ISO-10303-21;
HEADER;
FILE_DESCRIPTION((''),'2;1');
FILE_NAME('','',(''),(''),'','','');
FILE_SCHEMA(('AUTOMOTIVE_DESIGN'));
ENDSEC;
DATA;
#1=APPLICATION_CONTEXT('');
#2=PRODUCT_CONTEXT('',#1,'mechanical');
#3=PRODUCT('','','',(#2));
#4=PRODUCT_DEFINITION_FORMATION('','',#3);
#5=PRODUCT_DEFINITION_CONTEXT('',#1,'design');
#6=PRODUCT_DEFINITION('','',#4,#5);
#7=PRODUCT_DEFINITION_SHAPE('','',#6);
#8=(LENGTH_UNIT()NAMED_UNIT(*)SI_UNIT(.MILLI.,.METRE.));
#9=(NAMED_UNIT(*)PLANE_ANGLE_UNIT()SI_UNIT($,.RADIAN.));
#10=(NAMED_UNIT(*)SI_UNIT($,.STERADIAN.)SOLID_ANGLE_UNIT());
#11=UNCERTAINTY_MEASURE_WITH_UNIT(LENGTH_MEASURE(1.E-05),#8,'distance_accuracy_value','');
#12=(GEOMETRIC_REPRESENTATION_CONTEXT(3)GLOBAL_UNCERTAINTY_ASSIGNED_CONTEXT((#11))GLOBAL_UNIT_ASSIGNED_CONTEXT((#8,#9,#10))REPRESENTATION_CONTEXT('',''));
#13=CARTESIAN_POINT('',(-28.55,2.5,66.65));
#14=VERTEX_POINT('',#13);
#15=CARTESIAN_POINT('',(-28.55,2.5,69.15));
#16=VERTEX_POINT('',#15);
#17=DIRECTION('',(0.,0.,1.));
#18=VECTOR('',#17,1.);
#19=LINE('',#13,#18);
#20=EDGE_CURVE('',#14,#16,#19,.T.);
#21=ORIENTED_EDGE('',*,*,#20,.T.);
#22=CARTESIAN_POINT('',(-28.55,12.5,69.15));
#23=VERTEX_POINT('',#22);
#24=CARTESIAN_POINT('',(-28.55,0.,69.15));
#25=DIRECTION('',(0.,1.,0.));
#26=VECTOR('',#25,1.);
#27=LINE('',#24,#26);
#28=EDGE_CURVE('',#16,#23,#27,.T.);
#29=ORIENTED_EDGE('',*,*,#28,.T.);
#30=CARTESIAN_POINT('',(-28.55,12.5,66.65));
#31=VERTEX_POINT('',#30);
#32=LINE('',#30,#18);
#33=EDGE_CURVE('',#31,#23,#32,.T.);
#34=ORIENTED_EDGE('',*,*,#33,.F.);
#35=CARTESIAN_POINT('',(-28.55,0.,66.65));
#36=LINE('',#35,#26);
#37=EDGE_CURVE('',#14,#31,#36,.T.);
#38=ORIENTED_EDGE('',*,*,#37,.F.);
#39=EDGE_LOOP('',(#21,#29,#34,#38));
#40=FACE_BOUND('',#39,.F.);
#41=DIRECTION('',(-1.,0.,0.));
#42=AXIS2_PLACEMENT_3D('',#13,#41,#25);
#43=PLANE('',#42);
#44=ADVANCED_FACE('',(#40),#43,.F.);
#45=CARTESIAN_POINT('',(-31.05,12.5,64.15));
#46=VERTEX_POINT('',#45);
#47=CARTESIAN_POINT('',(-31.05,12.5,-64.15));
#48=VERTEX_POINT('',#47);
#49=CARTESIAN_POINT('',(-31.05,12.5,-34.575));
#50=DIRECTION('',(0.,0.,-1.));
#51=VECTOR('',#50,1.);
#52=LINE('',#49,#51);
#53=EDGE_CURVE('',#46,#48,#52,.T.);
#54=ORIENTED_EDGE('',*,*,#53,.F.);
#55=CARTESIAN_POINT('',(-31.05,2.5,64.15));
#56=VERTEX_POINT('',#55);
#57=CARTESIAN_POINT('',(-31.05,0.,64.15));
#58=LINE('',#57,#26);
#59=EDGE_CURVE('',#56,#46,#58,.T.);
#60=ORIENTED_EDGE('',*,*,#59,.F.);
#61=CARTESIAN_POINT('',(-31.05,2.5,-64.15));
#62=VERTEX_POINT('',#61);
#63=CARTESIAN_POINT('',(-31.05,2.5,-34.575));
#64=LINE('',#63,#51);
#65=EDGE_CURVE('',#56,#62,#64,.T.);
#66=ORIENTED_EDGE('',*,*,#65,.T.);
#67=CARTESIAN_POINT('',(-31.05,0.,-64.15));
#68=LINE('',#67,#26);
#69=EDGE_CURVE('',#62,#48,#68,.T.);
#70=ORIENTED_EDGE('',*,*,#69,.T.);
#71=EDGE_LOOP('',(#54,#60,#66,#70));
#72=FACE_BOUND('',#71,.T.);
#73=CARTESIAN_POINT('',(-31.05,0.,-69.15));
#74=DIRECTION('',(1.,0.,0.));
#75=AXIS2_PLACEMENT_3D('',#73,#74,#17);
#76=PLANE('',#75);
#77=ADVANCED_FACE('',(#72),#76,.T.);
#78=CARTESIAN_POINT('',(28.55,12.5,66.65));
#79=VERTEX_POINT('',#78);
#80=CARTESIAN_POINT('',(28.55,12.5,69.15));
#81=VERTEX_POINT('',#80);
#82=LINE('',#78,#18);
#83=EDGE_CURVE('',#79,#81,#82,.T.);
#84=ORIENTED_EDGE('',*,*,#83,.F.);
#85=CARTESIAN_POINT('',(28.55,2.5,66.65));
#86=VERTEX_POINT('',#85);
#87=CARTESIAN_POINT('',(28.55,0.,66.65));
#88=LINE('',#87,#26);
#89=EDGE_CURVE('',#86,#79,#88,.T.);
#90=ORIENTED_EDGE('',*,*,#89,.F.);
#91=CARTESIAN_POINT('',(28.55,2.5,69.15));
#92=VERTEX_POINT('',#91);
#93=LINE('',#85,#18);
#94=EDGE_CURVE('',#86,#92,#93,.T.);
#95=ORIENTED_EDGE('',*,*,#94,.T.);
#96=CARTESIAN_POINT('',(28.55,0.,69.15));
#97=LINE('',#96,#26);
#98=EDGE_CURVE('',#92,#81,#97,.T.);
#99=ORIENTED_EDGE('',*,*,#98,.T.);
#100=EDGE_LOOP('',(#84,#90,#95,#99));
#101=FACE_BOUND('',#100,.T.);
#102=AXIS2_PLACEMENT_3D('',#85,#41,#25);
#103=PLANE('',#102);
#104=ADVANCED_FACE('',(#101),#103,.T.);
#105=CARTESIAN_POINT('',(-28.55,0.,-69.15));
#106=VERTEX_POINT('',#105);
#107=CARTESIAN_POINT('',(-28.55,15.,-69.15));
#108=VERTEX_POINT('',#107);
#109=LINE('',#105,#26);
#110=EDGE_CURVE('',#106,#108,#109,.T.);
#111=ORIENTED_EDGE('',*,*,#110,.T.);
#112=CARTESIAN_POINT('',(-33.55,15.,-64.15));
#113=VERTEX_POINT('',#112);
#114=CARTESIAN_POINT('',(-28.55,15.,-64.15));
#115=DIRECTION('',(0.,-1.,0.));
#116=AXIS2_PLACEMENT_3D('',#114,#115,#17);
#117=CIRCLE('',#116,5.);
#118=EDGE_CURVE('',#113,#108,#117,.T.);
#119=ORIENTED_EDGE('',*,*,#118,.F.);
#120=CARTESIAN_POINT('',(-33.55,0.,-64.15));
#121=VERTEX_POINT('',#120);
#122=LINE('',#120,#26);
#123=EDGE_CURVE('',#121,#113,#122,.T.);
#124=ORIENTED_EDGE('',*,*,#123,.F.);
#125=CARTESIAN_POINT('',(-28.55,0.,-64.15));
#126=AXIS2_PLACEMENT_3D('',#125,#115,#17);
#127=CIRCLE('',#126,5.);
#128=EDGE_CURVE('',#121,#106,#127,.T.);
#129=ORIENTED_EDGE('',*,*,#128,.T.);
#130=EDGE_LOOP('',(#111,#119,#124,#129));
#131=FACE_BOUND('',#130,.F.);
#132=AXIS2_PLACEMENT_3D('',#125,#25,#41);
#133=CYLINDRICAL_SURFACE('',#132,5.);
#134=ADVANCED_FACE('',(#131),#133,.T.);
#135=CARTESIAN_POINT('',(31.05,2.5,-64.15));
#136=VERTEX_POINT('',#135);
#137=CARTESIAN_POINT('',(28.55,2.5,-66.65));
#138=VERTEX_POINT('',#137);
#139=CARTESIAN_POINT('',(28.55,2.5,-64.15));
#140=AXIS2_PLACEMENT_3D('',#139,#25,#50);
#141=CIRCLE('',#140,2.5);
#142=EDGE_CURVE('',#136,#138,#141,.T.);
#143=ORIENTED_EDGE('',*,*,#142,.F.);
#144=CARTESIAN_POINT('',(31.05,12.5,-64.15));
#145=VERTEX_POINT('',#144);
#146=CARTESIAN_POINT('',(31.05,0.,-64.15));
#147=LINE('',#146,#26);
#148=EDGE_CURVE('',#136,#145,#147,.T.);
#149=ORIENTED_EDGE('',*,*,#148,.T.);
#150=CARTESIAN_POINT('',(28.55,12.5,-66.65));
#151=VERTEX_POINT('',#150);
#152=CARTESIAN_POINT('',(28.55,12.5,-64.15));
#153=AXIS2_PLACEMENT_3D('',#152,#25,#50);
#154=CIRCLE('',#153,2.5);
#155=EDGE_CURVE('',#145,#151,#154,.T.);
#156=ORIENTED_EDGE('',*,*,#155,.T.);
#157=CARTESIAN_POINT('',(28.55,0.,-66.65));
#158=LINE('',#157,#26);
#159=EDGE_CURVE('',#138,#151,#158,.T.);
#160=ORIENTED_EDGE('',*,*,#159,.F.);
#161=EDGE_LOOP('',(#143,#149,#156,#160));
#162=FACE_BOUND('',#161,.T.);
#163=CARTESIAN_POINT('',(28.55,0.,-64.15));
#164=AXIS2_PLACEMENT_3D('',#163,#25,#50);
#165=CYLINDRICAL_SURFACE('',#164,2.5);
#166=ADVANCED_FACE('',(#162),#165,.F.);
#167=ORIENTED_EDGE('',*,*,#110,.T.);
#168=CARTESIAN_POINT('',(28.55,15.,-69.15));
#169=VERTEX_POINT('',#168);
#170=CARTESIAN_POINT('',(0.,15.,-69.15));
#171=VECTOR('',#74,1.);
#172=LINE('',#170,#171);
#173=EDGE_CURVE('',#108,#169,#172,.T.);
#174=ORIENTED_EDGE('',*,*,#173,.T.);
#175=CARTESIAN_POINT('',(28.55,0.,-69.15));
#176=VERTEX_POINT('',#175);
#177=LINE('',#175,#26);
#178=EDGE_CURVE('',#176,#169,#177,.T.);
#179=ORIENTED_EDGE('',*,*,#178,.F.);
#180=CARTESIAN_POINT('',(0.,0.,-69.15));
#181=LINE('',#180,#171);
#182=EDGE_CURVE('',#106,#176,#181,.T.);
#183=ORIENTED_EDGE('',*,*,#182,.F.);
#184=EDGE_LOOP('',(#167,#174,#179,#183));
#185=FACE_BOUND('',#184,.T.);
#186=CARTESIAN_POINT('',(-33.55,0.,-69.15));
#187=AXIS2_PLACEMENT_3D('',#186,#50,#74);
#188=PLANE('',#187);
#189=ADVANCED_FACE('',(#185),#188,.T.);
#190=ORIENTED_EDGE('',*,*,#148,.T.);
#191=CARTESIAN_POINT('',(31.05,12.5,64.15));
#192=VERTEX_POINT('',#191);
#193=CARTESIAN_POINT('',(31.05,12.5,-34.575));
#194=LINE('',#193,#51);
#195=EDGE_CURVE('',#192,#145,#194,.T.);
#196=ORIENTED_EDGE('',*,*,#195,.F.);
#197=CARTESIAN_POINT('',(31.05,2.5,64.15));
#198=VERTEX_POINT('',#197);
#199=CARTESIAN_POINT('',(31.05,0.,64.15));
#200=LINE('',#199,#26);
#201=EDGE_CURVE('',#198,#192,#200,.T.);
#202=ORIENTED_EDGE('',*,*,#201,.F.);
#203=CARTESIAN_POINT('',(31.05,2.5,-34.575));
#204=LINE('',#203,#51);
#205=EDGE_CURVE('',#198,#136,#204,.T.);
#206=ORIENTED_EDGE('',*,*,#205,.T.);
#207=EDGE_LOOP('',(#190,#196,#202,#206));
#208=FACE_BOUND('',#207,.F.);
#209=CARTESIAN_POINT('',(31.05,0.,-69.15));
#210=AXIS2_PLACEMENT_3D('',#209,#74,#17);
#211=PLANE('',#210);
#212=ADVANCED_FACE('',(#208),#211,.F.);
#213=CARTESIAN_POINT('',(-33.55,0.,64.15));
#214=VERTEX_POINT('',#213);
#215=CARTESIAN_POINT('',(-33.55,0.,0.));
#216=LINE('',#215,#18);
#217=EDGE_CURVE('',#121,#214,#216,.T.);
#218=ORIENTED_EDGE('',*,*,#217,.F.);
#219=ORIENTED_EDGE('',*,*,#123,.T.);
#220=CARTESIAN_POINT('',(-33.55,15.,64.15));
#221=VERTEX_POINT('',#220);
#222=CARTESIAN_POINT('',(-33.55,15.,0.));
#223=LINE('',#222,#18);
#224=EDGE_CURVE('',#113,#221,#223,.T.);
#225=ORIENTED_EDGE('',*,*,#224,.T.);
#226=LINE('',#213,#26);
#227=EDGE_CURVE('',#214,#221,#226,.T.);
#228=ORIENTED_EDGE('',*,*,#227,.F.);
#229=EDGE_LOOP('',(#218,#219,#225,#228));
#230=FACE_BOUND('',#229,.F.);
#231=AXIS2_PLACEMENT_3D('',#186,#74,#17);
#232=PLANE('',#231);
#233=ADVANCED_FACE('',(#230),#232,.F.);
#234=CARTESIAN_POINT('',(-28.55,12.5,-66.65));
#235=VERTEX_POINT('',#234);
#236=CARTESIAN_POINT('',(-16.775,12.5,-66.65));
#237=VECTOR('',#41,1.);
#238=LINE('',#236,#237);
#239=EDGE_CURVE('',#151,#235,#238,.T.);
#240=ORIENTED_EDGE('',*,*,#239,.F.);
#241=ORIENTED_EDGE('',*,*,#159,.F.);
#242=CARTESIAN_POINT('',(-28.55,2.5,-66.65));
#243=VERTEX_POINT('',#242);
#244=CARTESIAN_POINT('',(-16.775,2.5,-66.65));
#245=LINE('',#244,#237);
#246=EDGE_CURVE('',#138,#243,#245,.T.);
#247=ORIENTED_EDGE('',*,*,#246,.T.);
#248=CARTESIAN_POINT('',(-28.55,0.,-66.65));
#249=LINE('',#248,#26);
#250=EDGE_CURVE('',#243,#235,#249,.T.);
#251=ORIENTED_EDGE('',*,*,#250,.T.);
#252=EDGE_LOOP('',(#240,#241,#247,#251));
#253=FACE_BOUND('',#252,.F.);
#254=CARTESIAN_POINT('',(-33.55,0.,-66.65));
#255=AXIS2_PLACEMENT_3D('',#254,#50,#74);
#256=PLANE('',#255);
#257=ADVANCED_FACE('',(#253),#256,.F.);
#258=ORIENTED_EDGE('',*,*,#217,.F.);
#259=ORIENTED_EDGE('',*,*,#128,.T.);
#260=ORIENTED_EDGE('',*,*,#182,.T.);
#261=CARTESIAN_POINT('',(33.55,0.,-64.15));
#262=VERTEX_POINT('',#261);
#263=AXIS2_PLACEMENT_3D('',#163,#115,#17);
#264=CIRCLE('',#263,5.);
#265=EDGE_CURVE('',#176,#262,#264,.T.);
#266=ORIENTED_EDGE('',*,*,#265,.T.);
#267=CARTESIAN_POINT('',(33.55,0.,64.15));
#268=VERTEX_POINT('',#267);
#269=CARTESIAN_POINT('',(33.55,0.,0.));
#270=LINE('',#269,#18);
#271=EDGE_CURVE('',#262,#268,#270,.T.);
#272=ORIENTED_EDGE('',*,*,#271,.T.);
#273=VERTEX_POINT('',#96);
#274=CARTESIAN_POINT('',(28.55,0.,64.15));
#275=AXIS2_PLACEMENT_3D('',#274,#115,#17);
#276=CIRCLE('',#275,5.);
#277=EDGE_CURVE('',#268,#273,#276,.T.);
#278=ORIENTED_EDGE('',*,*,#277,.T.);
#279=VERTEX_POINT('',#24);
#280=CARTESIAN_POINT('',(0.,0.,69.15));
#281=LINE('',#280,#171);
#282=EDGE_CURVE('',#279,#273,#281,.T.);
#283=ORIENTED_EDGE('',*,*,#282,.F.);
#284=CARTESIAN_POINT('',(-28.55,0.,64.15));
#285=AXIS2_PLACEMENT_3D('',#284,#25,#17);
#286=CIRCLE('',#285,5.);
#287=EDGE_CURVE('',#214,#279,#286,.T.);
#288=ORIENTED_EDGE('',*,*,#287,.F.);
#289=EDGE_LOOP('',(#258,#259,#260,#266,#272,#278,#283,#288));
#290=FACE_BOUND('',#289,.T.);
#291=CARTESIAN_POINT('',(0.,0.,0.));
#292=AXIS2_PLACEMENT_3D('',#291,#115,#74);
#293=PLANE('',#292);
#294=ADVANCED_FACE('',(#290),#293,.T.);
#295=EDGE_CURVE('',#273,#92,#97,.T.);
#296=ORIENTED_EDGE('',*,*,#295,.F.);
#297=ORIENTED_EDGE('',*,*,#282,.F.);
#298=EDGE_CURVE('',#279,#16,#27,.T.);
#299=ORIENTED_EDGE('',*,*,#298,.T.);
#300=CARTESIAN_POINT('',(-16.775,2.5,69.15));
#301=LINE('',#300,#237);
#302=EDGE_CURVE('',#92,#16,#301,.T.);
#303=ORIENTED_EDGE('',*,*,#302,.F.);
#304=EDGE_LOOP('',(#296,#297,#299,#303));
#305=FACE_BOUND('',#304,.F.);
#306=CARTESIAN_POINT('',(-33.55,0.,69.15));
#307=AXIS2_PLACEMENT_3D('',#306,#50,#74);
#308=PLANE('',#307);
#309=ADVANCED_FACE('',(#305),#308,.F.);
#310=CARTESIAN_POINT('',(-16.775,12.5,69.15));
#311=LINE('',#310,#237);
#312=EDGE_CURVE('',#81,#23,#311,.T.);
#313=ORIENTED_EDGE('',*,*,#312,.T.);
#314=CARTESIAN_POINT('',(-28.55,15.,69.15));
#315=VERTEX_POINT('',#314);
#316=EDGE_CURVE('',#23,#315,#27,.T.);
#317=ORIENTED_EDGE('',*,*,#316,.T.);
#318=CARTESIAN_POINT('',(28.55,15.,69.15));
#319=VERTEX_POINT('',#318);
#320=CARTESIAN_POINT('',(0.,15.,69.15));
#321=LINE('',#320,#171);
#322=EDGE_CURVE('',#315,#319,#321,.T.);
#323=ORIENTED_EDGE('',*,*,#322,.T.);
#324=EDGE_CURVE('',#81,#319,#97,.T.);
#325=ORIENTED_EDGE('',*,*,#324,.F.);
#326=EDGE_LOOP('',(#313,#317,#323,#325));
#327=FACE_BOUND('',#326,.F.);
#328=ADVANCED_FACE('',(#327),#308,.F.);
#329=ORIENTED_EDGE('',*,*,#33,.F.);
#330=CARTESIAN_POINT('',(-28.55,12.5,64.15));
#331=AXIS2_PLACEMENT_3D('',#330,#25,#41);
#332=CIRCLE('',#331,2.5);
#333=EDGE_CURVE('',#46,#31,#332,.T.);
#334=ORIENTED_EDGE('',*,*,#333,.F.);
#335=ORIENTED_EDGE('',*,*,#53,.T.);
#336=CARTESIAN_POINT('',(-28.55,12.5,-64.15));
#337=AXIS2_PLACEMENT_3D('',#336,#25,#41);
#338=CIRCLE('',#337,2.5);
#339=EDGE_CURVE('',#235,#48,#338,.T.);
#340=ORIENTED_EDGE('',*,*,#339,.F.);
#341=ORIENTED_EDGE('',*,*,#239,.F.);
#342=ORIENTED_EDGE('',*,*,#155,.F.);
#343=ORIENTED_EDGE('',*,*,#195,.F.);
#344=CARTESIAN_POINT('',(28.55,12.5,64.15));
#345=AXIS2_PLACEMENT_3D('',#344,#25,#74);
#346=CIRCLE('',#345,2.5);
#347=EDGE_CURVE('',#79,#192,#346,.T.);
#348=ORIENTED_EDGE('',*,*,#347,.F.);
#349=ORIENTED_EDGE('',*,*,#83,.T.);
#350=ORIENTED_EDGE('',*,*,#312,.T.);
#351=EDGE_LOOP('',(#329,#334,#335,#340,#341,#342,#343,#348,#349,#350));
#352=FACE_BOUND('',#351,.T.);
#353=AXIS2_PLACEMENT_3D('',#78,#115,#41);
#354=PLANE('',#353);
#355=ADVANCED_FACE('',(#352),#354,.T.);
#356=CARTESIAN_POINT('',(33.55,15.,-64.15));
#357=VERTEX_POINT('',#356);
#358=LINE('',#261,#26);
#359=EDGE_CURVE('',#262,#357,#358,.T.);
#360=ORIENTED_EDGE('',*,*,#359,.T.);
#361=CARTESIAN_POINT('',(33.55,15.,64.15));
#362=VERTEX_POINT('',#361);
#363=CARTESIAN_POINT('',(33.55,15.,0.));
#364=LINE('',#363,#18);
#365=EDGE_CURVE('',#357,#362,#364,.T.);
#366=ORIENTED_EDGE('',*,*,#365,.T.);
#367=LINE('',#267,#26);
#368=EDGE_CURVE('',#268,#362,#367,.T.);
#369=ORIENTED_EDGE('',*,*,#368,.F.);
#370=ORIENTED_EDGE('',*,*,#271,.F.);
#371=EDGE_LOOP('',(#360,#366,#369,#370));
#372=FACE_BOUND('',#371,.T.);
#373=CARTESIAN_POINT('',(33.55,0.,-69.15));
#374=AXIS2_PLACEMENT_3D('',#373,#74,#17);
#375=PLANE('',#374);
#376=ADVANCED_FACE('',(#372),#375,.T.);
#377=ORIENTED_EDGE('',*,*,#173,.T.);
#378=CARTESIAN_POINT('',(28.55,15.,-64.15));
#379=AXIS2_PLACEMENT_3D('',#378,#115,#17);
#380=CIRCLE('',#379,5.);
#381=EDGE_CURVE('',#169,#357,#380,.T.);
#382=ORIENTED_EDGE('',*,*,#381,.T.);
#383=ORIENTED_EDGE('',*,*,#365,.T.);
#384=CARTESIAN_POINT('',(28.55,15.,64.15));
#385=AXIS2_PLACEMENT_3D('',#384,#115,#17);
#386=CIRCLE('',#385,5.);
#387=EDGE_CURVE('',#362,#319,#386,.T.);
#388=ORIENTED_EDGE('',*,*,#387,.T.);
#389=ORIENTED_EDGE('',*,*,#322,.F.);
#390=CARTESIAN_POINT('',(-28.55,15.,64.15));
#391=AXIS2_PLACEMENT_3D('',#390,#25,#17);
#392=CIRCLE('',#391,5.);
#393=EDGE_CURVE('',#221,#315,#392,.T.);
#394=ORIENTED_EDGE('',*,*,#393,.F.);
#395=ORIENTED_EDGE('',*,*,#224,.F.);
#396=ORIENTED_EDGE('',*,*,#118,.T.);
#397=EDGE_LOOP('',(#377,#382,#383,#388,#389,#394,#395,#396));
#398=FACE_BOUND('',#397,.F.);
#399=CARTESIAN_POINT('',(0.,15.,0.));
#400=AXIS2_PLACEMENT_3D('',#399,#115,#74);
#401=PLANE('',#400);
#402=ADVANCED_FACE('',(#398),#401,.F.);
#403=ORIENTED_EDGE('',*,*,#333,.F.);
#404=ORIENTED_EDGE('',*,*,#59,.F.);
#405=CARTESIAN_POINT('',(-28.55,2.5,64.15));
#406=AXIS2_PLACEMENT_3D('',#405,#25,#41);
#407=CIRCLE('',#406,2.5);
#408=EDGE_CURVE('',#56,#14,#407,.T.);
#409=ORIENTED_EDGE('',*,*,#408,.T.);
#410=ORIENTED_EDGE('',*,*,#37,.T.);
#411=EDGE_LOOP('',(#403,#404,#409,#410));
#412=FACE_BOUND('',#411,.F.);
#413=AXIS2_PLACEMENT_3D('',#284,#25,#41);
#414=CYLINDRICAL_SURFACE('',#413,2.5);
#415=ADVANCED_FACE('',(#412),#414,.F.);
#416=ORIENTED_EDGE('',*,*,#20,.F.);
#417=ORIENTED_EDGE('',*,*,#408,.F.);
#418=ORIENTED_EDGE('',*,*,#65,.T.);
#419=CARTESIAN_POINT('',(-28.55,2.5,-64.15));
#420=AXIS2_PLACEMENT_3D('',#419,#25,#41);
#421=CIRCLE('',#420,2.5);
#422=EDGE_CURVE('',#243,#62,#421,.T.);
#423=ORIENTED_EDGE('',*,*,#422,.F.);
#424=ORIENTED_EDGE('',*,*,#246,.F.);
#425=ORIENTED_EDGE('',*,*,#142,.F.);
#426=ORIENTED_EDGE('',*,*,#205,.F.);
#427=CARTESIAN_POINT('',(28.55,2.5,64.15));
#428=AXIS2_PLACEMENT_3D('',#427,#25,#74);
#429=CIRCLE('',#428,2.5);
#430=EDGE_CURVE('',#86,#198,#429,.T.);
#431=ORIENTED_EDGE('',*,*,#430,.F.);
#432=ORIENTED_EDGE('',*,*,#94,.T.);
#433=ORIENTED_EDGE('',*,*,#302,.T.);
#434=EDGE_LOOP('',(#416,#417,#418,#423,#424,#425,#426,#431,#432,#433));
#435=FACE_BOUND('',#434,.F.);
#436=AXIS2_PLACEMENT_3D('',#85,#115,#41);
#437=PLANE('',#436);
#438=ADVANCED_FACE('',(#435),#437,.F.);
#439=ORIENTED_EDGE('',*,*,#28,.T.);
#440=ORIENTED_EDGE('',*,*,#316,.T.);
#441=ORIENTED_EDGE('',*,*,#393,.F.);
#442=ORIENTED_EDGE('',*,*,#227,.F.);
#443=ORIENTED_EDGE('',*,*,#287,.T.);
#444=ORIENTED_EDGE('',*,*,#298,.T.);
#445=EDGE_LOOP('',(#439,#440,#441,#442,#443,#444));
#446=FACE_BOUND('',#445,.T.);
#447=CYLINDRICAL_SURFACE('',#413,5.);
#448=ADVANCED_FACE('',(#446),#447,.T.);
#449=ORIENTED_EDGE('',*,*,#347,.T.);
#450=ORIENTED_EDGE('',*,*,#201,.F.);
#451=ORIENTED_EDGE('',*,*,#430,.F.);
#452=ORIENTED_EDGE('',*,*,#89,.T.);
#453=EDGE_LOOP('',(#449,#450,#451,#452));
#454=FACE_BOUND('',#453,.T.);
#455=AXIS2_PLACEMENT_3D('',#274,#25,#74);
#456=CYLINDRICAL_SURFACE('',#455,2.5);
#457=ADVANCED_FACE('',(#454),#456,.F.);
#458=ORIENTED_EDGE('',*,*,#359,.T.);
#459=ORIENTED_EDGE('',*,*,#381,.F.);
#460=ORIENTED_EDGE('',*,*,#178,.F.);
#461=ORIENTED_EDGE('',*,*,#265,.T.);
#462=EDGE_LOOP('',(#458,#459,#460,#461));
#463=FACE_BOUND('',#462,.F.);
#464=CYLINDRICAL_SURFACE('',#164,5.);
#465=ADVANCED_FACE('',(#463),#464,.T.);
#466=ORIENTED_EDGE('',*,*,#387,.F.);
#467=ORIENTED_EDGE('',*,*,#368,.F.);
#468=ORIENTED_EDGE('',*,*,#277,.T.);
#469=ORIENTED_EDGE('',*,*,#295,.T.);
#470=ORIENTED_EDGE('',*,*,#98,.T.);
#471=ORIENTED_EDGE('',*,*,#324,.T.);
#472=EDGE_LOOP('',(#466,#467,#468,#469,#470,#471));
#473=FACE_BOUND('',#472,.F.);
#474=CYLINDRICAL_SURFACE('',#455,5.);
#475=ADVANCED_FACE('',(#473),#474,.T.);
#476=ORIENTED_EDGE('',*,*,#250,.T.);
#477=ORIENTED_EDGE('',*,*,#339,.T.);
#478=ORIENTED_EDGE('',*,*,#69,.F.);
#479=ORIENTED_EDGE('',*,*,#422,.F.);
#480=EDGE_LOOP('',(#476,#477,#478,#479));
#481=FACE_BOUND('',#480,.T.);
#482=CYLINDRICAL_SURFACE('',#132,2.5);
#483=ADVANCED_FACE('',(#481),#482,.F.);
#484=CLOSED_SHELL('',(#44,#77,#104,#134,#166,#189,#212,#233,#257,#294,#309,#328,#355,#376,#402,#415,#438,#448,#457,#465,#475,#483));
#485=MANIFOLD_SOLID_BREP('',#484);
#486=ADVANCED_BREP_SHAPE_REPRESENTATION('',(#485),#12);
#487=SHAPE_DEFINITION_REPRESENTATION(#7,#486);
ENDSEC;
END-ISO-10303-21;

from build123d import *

# Parameters (mm, degrees)
F0_W     = 67.1
F0_H     = 138.3
F1_DEPTH = 15
F2_R     = 5
F3_T     = -2.5


# Not quite as in the source:
# - a shell that OpenCascade refuses in one call is made with other operations: the cavity is built on its own and cut out


with BuildPart() as f1:
    # F0 (on Front) → F1 (new body)
    with BuildSketch(Plane.XZ):
        Rectangle(F0_W, F0_H)
    extrude(amount=-F1_DEPTH)

    # F2
    f2_edges = [f1.edges().sort_by_distance(p)[0] for p in [
        (-33.55, 7.5, 69.15),
        (33.55, 7.5, 69.15),
        (-33.55, 7.5, -69.15),
        (33.55, 7.5, -69.15),
    ]]
    fillet(f2_edges, radius=F2_R)

    # F3: a shell. OpenCascade refuses it in one call, so the cavity is built on its own and cut out:
    # the body offset inwards by the wall thickness, plus a prism from it out through each open face.
    f3_core = offset(f1.part, amount=F3_T, mode=Mode.PRIVATE)
    f3_exits = [f3_core.faces().sort_by_distance(p)[0] for p in [
        (0, 7.5, 66.65),
    ]]
    add(f3_core, mode=Mode.SUBTRACT)
    extrude(f3_exits, amount=-F3_T, mode=Mode.SUBTRACT)


solid = f1.part
